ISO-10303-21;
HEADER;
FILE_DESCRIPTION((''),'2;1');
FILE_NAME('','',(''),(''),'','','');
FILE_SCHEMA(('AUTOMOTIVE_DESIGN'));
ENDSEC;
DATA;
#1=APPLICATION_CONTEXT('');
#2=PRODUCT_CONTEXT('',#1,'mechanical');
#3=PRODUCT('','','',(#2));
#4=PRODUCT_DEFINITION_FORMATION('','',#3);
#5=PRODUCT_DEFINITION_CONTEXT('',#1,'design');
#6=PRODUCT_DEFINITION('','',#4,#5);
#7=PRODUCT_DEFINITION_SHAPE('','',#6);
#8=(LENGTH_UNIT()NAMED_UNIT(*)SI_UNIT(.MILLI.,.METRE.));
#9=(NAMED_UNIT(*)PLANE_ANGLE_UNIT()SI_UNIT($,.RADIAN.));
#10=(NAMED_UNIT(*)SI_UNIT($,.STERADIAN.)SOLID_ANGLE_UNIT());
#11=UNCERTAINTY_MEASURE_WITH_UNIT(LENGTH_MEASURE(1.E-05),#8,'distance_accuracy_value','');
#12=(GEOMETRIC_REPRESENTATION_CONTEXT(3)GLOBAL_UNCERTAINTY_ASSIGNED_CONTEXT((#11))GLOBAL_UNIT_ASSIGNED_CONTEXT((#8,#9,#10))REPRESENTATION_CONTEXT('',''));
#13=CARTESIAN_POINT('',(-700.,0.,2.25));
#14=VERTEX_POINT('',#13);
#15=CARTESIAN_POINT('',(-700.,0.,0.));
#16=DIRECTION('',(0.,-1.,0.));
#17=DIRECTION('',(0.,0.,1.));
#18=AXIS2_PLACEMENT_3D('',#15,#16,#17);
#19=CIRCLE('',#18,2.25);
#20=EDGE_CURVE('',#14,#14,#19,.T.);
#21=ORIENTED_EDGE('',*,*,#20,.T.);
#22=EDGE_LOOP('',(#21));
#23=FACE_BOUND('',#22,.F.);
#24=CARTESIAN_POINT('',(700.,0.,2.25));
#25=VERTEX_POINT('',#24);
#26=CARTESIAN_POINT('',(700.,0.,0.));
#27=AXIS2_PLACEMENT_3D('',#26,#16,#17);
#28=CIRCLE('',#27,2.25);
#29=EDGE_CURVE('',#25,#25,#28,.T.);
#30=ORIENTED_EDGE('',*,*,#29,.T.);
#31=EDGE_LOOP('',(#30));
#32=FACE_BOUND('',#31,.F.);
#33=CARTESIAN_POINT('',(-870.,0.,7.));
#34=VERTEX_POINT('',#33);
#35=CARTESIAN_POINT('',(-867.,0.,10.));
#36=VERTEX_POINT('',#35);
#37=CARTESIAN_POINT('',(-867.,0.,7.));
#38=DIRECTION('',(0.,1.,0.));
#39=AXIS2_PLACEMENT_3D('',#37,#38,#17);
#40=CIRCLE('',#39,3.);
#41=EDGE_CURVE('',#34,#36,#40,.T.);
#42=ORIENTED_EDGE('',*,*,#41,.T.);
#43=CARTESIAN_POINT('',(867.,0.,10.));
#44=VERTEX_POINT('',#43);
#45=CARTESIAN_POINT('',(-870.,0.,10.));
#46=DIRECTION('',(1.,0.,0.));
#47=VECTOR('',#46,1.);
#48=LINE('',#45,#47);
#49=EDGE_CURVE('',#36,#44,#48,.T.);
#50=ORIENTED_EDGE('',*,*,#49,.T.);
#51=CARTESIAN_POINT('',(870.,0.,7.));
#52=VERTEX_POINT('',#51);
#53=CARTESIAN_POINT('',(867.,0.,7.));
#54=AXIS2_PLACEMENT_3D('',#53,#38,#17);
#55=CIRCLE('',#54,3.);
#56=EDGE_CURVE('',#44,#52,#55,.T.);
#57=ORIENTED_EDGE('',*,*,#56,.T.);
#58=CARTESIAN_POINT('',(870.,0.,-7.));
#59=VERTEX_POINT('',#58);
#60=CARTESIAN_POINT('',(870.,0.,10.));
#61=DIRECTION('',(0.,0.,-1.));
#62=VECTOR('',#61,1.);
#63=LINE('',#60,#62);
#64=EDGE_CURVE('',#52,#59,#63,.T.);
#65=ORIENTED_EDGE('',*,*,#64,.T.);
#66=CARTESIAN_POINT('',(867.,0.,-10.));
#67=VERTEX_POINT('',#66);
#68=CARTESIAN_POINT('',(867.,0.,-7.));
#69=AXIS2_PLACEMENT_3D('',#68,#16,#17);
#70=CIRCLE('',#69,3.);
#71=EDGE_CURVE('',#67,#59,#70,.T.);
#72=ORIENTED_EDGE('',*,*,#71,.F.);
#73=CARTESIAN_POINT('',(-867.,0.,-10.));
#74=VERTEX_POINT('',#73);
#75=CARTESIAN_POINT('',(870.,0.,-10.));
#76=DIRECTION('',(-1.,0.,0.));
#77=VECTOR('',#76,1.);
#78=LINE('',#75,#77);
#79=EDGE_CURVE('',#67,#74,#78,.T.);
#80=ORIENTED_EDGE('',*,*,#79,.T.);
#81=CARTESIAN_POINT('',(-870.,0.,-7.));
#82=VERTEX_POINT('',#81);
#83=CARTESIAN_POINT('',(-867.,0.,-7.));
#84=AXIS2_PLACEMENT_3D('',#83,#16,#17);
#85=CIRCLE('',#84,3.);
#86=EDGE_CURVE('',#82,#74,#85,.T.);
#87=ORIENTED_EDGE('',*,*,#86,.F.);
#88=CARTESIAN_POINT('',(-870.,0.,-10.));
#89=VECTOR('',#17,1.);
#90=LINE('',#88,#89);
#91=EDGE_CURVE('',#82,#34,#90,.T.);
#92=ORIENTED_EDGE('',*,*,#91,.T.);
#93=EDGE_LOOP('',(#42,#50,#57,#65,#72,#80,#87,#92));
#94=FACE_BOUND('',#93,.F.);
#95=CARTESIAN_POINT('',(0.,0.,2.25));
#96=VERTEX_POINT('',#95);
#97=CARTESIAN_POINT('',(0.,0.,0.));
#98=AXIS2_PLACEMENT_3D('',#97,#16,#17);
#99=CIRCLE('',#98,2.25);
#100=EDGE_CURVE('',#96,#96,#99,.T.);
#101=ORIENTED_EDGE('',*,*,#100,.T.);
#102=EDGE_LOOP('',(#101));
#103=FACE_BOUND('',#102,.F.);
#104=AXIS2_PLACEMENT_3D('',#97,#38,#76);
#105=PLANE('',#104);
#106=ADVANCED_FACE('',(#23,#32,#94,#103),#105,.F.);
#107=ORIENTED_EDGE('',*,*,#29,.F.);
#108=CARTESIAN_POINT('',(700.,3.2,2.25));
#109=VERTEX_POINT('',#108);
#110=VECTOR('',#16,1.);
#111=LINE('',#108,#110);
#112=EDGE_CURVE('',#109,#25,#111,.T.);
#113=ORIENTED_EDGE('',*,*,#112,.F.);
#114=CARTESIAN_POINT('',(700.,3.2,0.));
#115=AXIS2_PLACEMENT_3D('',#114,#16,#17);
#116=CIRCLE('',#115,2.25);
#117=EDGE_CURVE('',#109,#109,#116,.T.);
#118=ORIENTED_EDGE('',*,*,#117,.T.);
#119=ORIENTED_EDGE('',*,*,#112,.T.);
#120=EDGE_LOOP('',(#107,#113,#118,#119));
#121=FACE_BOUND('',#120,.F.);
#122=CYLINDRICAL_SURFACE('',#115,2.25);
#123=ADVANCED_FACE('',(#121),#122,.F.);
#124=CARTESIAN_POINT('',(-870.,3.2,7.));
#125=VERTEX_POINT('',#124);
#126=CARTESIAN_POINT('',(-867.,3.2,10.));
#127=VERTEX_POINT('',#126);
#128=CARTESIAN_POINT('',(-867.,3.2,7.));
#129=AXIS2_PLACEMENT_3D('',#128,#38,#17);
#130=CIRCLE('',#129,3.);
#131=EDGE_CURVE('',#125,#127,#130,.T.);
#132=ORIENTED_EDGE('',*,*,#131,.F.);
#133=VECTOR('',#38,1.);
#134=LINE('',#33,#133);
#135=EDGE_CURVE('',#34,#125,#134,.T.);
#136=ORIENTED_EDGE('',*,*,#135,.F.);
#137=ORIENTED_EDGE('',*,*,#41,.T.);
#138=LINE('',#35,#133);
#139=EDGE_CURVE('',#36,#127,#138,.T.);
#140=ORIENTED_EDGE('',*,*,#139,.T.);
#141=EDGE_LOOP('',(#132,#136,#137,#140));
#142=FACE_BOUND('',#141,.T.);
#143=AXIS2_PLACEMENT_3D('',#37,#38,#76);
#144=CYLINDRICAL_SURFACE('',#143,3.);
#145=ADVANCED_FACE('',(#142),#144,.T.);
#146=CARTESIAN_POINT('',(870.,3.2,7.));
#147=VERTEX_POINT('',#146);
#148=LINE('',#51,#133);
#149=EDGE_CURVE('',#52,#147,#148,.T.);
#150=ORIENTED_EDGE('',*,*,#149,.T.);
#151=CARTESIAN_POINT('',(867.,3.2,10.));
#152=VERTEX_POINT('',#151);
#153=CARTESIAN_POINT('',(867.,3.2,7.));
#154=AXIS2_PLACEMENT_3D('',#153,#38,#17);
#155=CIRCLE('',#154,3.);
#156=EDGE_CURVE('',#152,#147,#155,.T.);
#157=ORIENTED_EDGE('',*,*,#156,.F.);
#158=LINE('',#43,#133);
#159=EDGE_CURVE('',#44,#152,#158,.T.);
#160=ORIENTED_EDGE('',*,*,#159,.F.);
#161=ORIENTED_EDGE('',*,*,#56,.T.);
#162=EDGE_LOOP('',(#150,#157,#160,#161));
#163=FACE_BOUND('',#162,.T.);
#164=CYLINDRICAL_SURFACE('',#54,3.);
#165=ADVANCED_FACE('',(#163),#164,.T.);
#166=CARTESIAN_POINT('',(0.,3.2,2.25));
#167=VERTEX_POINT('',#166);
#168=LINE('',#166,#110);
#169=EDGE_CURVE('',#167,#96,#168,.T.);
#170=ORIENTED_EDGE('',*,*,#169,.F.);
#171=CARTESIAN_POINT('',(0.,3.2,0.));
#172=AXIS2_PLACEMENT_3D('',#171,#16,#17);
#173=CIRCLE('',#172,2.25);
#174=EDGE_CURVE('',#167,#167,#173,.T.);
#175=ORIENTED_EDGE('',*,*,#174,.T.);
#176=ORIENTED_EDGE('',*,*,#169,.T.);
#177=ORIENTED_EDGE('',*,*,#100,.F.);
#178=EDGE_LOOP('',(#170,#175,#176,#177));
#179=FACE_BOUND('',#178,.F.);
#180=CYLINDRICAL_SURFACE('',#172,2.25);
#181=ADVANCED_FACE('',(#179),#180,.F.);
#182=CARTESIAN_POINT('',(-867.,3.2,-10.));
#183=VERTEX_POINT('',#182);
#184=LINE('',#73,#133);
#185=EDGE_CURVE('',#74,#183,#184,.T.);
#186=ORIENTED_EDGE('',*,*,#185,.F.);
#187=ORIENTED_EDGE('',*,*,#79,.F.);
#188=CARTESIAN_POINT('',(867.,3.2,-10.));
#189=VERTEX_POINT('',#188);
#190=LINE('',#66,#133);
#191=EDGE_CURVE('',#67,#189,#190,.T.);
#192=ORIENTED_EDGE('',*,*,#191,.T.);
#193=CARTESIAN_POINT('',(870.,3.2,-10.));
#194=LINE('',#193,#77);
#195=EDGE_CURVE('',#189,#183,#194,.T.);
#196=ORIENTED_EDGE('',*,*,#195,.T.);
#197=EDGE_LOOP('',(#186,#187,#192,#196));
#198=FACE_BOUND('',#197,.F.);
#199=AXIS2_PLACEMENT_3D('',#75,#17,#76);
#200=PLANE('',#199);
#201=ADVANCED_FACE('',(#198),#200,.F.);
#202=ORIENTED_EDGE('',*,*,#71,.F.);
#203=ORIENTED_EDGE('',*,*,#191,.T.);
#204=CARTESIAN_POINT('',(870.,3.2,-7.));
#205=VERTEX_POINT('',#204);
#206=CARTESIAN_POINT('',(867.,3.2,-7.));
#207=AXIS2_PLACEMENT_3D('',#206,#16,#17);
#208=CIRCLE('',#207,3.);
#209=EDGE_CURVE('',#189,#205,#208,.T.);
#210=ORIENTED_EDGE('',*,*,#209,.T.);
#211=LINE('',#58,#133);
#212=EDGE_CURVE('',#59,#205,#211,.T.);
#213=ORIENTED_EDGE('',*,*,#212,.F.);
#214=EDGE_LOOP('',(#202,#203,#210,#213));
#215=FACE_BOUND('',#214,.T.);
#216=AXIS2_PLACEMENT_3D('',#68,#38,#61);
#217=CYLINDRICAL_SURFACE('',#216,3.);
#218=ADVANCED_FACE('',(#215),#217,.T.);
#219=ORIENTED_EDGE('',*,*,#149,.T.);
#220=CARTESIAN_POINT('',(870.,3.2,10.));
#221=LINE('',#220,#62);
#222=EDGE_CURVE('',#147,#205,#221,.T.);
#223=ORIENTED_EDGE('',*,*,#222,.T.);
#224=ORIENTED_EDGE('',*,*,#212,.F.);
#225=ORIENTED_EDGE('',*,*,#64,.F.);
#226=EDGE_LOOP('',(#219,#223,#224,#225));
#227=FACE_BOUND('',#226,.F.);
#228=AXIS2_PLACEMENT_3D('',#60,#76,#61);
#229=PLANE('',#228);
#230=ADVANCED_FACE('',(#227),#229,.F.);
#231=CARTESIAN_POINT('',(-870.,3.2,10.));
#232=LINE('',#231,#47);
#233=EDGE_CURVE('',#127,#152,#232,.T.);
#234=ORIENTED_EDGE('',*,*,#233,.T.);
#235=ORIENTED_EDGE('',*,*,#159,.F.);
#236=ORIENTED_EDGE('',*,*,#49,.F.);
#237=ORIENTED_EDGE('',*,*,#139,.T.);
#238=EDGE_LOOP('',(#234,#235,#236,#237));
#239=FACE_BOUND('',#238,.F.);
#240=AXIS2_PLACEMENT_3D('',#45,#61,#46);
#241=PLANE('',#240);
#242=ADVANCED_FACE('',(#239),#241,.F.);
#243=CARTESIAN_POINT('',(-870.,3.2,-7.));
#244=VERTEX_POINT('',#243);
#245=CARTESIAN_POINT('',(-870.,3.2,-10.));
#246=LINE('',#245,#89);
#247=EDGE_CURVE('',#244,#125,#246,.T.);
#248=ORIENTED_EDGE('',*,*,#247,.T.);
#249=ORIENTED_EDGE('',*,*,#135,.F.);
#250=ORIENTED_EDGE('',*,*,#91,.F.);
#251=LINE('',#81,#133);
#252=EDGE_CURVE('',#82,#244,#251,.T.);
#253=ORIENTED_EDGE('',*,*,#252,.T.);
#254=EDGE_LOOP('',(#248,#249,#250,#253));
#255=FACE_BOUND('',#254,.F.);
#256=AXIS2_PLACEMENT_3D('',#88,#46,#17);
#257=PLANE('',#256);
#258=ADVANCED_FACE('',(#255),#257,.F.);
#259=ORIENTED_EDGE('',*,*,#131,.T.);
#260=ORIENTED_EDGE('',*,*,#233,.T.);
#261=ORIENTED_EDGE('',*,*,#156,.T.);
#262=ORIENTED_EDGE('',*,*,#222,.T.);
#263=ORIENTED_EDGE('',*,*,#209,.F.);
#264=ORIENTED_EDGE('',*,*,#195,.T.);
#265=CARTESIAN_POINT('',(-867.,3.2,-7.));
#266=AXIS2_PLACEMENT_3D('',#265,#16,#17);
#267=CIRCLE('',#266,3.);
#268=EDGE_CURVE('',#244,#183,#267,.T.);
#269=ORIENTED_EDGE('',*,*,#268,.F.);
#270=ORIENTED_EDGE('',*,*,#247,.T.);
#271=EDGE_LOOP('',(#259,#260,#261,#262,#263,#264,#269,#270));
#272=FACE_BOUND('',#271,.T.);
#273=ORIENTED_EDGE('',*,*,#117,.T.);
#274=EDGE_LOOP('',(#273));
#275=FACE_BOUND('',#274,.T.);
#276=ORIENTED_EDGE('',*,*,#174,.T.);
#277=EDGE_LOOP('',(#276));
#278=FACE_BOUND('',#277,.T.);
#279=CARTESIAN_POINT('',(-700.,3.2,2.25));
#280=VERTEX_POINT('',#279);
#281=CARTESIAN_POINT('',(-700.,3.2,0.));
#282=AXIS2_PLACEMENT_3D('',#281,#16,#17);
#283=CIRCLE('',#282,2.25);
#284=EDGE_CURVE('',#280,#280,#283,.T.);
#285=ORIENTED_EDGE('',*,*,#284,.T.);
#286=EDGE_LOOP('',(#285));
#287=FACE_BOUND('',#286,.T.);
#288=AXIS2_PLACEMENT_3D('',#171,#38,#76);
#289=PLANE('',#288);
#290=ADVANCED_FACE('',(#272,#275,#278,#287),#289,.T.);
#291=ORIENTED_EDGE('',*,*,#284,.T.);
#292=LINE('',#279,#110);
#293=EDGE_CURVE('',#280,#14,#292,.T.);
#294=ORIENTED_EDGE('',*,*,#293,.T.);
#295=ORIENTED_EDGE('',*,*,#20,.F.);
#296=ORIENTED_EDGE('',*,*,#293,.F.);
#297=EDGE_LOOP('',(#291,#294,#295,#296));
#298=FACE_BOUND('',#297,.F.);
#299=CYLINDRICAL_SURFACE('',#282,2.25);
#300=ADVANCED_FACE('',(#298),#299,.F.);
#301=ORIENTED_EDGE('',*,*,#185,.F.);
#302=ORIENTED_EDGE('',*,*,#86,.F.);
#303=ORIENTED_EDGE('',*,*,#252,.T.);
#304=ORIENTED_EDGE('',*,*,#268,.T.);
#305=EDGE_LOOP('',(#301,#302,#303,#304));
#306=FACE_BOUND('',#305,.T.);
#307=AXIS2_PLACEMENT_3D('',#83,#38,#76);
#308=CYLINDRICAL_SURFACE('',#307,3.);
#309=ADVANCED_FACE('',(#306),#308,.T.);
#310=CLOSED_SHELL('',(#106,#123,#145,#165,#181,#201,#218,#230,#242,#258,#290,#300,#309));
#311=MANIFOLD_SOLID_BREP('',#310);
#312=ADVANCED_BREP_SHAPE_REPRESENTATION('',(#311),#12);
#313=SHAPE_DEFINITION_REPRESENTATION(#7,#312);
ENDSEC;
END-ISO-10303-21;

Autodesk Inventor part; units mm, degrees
ref_plane "YZ Plane" through (0, 0, 0) normal (1, 0, 0) x (0, 1, 0)
ref_plane "XZ Plane" through (0, 0, 0) normal (0, 1, 0) x (-1, 0, 0)
ref_plane "XY Plane" through (0, 0, 0) normal (0, 0, 1) x (1, 0, 0)
sketch "Sketch1" plane through (0, 0, 0) normal (0, 1, 0) x (-1, 0, 0)
  line L0 (870, 10) -> (-870, 10)
  line L1 (-870, 10) -> (-870, -10)
  line L2 (-870, -10) -> (870, -10)
  line L3 (870, -10) -> (870, 10)
  line L4 (870, 10) -> (-870, -10) construction
  line L5 (-870, 10) -> (870, -10) construction
  point P0 (0, 0)
  dimension "d0" = 1740
  dimension "d1" = 20
extrude "Plate1" add sketch "Sketch1" along normal blind 3.2
sketch "Sketch3" plane through (0, 3.2, 0) normal (0, 1, 0) x (1, 0, 0)
  line L0 (0, 0) -> (-700, 0)
  line L1 (0, 0) -> (0, 5)
  point P0 (700, 0)
  dimension "d13" = 700
  dimension "d14" = 5
hole "Hole1" at (0, 3.2, 0) at (-700, 3.2, 0) at (700, 3.2, 0) direction (0, -1, 0) diameter 4.5 depth 3.2 clearance for "Countersunk Flat Head Screw ISO 2009/7046" size "M4" standard "ISO"
fillet "Corner Round1" radius 3 4 edges at (870, 1.6, 10) (-870, 1.6, 10) (870, 1.6, -10) (-870, 1.6, -10)
equation "\"d20\" = Thickness"
equation "\"d2\" = Thickness"
equation "\"BendReliefWidth\" = Thickness"
equation "\"BendReliefDepth\" = 0.5 * Thickness"
equation "\"CornerReliefSize\" = 4 * Thickness"
equation "\"MinimumRemnant\" = 2 * Thickness"
equation "\"TransitionRadius\" = BendRadius"
equation "\"JacobiRadiusSize\" = BendRadius"
equation "\"GapSize\" = Thickness"
equation "\"Thickness\" = 3.2"
equation "\"BendRadius\" = 1.516"
properties part number "SP55V1 Chapa Guia"
